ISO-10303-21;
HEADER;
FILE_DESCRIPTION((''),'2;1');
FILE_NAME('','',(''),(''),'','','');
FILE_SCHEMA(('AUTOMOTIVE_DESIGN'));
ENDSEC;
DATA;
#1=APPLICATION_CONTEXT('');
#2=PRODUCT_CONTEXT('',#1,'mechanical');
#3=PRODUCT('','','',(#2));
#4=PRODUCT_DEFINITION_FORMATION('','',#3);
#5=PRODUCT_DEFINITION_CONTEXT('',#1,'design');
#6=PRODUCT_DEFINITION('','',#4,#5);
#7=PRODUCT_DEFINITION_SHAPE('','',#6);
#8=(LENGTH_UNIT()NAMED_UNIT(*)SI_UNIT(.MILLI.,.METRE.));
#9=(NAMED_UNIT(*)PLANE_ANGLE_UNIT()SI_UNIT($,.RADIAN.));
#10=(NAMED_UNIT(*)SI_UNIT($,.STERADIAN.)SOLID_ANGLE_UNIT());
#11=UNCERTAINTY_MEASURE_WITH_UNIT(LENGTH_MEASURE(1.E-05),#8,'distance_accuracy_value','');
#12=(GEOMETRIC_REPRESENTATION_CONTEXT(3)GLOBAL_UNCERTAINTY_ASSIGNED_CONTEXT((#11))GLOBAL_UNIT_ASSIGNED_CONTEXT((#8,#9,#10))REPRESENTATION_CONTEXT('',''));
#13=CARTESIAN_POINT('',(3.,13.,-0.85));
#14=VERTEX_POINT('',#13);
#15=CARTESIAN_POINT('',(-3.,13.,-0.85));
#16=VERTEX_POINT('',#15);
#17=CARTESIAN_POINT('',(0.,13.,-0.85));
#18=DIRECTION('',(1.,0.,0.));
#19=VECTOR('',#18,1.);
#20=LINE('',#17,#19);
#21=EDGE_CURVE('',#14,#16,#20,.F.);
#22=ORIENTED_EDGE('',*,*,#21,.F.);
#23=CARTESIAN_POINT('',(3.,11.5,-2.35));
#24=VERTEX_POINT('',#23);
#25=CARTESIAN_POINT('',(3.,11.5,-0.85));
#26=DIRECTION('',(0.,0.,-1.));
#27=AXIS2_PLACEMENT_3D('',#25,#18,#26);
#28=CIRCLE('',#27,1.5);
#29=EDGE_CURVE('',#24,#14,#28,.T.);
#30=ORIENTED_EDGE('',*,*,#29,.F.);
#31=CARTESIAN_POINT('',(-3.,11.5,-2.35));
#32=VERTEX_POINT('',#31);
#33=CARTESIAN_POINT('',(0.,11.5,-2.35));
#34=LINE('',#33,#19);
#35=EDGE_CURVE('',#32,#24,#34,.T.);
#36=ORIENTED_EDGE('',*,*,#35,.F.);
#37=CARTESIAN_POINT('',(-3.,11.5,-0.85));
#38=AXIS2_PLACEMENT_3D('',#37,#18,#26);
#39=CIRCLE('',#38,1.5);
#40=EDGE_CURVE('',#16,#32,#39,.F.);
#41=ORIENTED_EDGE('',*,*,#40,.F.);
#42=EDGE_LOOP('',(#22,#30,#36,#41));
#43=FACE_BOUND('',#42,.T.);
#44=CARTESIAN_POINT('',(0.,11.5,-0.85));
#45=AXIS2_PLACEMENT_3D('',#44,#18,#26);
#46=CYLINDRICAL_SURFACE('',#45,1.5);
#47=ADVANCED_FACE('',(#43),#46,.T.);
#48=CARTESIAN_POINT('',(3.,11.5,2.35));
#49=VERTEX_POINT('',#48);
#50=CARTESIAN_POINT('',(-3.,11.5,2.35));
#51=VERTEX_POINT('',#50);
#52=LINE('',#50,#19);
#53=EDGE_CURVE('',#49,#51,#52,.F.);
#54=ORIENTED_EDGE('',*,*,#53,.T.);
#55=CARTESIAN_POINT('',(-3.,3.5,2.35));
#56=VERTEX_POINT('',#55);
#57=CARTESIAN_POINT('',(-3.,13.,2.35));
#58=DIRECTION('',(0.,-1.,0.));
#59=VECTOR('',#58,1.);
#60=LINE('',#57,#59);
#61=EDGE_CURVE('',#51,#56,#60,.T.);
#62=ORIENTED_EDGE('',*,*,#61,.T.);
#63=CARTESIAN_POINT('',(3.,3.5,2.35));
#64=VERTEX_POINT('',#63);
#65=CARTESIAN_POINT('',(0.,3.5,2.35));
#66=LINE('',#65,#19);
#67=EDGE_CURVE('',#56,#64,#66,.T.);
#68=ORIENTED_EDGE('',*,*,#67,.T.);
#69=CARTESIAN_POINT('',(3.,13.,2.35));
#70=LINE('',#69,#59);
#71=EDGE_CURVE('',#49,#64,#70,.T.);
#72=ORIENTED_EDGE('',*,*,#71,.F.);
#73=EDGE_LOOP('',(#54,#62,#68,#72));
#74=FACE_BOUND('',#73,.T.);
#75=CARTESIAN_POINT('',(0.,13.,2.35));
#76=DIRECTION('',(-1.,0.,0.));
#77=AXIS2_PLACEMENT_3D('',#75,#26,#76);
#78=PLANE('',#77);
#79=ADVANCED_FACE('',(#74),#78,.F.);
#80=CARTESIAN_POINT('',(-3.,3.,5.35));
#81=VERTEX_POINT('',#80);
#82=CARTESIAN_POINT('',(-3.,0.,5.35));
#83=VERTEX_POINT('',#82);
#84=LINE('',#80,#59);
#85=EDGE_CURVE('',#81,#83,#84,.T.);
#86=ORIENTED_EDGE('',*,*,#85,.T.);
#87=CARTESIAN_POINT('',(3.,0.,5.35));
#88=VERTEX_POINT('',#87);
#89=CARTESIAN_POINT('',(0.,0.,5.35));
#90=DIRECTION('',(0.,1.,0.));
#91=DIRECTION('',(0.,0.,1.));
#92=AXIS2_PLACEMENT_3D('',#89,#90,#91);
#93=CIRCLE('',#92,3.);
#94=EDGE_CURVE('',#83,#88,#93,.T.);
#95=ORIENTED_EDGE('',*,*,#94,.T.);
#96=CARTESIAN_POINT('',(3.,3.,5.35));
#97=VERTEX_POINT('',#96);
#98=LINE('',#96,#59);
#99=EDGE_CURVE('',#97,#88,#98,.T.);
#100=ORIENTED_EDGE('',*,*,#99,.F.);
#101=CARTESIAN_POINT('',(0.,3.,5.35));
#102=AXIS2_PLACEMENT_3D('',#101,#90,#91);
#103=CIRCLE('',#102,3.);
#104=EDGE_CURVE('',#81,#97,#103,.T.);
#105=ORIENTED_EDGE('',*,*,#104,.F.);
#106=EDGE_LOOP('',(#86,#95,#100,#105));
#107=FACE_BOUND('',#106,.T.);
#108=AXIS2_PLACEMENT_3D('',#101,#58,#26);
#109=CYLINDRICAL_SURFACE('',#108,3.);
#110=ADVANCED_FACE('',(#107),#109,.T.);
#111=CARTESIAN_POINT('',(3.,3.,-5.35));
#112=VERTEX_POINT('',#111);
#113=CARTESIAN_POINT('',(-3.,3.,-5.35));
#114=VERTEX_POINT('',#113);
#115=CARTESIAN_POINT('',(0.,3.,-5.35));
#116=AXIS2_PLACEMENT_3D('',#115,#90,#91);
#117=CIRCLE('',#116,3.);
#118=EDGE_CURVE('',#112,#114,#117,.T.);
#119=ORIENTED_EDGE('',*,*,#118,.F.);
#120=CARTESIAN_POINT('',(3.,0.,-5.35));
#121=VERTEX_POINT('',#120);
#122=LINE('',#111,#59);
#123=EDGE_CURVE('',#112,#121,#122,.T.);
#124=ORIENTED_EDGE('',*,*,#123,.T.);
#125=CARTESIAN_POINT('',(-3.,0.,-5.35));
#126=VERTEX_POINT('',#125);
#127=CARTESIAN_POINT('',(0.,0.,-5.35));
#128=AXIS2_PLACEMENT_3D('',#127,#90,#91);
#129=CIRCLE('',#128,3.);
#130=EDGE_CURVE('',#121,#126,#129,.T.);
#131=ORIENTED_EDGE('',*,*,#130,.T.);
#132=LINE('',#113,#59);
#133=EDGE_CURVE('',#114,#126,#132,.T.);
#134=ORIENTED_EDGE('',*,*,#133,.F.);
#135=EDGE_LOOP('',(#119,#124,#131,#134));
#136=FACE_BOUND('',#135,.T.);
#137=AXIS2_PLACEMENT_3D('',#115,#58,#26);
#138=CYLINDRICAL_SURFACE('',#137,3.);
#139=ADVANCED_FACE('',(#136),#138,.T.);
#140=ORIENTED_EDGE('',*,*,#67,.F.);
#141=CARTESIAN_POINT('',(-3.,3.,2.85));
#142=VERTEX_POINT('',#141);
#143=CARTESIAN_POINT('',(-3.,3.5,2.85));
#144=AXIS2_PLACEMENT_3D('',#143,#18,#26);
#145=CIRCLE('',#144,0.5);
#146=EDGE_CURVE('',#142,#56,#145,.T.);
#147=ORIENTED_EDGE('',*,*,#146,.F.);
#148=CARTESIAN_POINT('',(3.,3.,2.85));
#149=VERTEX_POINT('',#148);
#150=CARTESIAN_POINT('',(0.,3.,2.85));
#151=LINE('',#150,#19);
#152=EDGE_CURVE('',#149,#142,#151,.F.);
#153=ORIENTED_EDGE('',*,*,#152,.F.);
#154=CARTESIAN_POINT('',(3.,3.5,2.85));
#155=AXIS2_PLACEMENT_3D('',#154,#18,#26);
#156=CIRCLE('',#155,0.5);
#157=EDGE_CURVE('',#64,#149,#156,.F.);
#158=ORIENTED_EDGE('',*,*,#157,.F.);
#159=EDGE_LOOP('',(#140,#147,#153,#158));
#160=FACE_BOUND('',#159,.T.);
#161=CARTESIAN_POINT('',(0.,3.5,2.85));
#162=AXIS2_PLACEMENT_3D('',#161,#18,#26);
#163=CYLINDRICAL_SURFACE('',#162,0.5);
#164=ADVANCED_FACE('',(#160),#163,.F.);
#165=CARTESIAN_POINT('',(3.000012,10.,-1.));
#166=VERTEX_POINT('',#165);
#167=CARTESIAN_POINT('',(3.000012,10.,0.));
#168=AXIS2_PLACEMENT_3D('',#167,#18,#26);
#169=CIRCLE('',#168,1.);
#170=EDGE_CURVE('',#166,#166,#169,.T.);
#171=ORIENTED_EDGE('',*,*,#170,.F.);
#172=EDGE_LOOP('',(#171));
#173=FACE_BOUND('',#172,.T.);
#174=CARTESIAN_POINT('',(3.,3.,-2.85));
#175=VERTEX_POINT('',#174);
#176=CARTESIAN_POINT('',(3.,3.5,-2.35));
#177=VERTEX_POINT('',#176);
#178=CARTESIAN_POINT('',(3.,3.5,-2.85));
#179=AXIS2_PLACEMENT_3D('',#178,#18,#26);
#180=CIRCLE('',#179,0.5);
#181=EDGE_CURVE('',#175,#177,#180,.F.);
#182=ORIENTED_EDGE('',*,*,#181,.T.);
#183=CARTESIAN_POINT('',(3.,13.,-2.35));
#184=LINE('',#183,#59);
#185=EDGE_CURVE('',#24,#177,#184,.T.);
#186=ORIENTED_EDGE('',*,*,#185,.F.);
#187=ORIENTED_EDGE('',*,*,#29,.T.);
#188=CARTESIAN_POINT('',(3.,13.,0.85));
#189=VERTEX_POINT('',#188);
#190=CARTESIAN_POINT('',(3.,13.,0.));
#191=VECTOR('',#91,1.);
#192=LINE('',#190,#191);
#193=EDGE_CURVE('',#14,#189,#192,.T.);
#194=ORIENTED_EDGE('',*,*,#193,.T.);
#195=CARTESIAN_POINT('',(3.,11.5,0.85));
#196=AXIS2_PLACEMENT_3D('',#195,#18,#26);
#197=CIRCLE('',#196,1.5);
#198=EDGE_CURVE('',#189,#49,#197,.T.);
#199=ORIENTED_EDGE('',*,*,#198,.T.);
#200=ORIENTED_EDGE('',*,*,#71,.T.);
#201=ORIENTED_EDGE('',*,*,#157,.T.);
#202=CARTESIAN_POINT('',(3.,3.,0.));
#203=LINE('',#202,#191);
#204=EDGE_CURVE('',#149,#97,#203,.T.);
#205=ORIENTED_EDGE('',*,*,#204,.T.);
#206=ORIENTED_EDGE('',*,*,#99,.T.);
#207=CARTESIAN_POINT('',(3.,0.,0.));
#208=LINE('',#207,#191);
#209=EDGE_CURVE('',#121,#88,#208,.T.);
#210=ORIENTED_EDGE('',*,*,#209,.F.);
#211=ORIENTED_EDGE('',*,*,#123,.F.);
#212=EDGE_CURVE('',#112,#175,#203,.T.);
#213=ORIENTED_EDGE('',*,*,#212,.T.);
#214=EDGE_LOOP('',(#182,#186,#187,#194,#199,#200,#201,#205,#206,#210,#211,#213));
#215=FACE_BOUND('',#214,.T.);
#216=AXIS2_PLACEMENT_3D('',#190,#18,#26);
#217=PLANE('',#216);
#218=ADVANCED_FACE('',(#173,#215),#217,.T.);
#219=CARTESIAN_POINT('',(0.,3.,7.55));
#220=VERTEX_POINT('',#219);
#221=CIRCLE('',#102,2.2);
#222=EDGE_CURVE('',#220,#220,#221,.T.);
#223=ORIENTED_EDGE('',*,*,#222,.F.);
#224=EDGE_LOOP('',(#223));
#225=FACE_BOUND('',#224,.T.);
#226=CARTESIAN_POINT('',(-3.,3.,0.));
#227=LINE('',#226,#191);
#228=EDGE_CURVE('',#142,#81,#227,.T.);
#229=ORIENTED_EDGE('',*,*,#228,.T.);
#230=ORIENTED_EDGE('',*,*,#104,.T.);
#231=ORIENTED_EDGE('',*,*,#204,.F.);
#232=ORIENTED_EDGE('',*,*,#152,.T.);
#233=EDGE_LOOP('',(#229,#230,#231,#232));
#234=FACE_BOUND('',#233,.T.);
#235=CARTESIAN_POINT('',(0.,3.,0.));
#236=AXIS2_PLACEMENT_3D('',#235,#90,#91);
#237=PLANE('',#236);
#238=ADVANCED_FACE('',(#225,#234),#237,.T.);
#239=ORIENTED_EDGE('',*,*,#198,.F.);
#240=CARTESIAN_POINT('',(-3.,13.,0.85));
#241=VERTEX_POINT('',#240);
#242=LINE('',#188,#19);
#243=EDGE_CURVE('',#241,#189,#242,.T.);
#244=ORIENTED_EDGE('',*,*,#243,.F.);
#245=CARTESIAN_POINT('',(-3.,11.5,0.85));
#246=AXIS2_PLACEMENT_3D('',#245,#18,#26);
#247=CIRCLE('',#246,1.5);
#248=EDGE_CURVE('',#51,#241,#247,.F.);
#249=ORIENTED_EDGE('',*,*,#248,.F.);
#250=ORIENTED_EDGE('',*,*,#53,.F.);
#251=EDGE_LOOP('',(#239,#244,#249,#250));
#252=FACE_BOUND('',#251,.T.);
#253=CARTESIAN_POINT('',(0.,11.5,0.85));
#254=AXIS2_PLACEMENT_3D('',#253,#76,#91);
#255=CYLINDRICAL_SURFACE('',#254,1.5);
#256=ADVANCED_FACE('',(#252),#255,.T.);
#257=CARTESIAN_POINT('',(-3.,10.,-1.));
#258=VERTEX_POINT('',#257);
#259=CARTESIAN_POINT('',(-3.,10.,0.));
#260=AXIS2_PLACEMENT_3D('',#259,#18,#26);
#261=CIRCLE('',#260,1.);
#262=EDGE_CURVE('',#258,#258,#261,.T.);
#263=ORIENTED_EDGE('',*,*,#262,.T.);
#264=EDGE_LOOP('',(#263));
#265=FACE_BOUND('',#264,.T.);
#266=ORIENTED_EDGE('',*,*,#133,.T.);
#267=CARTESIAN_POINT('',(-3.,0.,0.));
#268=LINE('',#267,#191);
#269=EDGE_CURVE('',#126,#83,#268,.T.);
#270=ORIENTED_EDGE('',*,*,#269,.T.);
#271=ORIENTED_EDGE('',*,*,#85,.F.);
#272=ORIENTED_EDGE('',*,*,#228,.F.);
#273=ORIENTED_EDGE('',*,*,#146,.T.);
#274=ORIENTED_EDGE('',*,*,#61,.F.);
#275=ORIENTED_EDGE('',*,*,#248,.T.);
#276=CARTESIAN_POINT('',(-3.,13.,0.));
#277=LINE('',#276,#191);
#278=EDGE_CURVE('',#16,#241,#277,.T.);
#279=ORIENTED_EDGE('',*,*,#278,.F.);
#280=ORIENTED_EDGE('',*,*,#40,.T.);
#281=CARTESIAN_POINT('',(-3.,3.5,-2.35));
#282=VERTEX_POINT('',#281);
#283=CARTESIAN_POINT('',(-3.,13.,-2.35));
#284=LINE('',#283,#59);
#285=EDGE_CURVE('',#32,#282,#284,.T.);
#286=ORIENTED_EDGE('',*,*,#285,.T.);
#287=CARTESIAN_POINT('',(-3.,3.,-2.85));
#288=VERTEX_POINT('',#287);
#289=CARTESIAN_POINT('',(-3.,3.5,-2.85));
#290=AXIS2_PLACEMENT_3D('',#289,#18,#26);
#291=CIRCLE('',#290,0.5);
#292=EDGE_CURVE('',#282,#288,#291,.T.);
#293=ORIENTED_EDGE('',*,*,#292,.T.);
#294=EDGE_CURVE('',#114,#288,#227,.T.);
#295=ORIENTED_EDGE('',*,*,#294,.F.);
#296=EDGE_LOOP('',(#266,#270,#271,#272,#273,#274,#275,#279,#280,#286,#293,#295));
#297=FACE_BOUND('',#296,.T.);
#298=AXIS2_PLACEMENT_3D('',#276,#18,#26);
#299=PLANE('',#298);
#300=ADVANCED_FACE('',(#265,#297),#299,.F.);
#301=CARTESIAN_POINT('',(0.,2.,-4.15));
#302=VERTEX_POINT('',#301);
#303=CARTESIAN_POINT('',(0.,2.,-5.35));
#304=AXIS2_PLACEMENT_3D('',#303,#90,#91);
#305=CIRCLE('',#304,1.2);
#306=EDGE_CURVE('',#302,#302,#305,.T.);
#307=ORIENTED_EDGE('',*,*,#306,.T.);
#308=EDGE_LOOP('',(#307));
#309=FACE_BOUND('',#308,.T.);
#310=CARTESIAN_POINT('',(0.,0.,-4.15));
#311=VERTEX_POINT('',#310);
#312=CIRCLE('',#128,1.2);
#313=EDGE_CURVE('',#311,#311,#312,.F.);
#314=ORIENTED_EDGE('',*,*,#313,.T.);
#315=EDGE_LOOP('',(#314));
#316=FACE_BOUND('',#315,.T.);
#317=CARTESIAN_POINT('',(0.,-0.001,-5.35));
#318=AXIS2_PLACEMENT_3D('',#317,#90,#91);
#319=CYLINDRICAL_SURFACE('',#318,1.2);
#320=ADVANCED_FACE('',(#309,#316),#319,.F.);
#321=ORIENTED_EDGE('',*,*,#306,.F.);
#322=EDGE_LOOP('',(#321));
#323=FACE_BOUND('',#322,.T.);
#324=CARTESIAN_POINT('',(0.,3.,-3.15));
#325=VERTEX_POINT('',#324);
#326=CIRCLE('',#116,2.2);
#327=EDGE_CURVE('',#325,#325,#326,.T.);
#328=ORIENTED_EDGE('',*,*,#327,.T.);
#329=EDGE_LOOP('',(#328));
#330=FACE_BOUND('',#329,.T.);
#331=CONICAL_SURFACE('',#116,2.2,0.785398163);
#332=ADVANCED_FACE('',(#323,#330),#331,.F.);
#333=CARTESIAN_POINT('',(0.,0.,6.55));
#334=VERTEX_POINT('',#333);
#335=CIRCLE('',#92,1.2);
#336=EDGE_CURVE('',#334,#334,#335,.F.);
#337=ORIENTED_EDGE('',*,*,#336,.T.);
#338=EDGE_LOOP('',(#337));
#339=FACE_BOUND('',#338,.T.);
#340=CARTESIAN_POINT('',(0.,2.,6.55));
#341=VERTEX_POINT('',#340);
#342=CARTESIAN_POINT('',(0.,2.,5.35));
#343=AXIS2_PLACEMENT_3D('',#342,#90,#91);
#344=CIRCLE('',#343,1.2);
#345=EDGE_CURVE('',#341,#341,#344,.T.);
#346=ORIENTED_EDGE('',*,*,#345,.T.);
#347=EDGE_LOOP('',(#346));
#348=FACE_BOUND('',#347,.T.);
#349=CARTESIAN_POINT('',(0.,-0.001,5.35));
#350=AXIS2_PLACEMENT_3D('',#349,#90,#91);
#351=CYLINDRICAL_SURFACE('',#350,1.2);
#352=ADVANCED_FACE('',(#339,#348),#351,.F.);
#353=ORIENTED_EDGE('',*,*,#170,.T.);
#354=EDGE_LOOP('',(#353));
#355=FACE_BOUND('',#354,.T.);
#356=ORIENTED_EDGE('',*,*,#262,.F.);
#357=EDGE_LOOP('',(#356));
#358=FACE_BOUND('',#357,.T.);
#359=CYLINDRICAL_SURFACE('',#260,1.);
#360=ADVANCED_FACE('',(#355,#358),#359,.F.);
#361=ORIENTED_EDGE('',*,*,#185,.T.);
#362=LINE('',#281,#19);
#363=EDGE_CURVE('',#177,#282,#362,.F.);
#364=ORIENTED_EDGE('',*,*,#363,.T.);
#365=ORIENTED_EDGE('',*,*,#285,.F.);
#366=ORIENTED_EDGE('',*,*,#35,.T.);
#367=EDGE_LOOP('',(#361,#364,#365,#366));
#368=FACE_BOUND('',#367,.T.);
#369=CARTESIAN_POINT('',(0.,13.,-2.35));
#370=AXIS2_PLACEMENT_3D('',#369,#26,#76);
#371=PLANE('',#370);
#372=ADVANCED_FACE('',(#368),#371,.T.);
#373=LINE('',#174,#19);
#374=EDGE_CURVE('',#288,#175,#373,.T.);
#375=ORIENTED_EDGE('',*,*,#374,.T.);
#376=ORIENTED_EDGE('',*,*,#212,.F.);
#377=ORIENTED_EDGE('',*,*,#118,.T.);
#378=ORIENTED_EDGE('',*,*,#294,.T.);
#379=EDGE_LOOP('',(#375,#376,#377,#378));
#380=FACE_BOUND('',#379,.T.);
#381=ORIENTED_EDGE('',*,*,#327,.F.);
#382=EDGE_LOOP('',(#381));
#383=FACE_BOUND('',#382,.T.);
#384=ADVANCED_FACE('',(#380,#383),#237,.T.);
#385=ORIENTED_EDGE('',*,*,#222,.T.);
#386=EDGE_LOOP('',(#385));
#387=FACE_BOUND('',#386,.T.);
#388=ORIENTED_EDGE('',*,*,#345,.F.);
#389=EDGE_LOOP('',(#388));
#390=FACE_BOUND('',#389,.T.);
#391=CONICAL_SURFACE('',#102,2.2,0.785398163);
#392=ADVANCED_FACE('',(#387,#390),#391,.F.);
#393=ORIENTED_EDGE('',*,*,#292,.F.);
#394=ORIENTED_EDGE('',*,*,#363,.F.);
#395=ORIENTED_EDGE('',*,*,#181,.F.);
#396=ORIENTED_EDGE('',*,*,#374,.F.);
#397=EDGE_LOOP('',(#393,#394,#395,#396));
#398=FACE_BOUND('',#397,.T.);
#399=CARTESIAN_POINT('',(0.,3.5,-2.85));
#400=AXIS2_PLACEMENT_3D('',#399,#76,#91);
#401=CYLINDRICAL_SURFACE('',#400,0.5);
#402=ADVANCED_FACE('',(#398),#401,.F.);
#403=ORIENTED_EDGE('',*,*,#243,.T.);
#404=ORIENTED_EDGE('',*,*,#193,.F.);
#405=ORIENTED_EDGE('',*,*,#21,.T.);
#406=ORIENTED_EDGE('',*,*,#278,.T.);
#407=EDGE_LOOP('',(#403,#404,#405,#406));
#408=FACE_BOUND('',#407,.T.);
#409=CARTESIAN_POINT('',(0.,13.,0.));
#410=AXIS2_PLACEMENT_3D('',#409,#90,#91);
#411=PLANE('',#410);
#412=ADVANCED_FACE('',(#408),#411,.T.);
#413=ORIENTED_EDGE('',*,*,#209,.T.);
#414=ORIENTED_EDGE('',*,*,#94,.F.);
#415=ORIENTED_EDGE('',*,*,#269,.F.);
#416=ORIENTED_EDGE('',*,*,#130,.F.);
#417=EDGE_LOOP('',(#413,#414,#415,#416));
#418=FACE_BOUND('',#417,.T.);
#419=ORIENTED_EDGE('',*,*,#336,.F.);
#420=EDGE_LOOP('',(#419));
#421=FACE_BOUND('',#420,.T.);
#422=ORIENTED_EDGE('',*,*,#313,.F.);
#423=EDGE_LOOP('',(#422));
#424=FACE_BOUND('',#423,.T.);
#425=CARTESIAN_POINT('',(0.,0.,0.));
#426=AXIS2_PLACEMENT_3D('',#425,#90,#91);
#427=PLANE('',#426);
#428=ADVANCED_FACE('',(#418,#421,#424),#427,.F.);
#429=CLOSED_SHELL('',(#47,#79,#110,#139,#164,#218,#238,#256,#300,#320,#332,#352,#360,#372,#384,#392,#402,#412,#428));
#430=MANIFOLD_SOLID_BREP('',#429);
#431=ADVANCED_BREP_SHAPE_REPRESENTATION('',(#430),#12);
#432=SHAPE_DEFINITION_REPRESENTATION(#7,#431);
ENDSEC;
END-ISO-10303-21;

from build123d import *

# Parameters (mm, degrees)
CROQUIS1_W                   = 3
CROQUIS1_H                   = 4.7
SALIENTE_EXTRUIR1_DEPTH      = 13
SALIENTE_EXTRUIR2_DEPTH      = 3
CORTAR_EXTRUIR1_DEPTH        = 17.5747549
CORTAR_EXTRUIR1_DEPTH_BACK   = 17.5747549
CROQUIS2_R                   = 1
REDONDEO1_R                  = 0.5
TALADROAVANZADO1_OUTLINE_R   = 1.2
TALADROAVANZADO1_DEPTH       = 1
TALADROAVANZADO1_DRAFT       = -45
TALADROAVANZADO1_2_OUTLINE_R = 1.2
TALADROAVANZADO1_2_DEPTH     = 1
TALADROAVANZADO1_2_DRAFT     = -45
REDONDEO2_R                  = 1.5
CORTAR_EXTRUIR2_REACH        = 16.132
CROQUIS4_R                   = 1.2


# Read off the part's stored shape, not the designer's step: TaladroAvanzado1
with BuildPart() as part:
    # Croquis1 → Saliente-Extruir1 (new body)
    with BuildSketch(Plane(origin=(0, 0, 0), x_dir=(1, 0, 0), z_dir=(0, 1, 0))):
        with Locations((-1.5, 0)):
            Rectangle(CROQUIS1_W, CROQUIS1_H)
        with Locations((1.5, 0)):
            Rectangle(CROQUIS1_W, CROQUIS1_H)
    extrude(amount=SALIENTE_EXTRUIR1_DEPTH)

    # Croquis1<3> → Saliente-Extruir2 (add)
    with BuildSketch(Plane(origin=(0, 0, 0), x_dir=(1, 0, 0), z_dir=(0, 1, 0))):
        with BuildLine():
            Line((3, 2.35), (3, 5.35))
            ThreePointArc((3, 5.35), (0, 8.35), (-3, 5.35))
            Line((-3, 5.35), (-3, 2.35))
            Line((-3, 2.35), (3, 2.35))
        make_face()
        with BuildLine():
            Line((3, -5.35), (3, -2.35))
            Line((3, -2.35), (-3, -2.35))
            Line((-3, -2.35), (-3, -5.35))
            ThreePointArc((-3, -5.35), (0, -8.35), (3, -5.35))
        make_face()
    extrude(amount=SALIENTE_EXTRUIR2_DEPTH)

    # Croquis2 → Cortar-Extruir1 (cut, two sides: drawn at the far end of the back side and taken through both)
    with BuildSketch(Plane(origin=(3, 0, 0), x_dir=(0, 0, -1), z_dir=(1, 0, 0)).offset(-CORTAR_EXTRUIR1_DEPTH_BACK)):
        with Locations((0, 10)):
            Circle(CROQUIS2_R)
    extrude(amount=CORTAR_EXTRUIR1_DEPTH + CORTAR_EXTRUIR1_DEPTH_BACK, mode=Mode.SUBTRACT)

    # Redondeo1
    redondeo1_edges = [part.edges().sort_by_distance(p)[0] for p in [
        (0, 3, 2.35),
        (0, 3, -2.35),
    ]]
    fillet(redondeo1_edges, radius=REDONDEO1_R)


with BuildPart() as taladroavanzado1_tool:
    # TaladroAvanzado1 outline → TaladroAvanzado1 (with draft: the straight prism first)
    with BuildSketch(Plane(origin=(0, 2, 0), x_dir=(1, 0, 0), z_dir=(0, 1, 0))):
        with Locations((0, 5.35)):
            Circle(TALADROAVANZADO1_OUTLINE_R)
    extrude(amount=TALADROAVANZADO1_DEPTH)
    # TaladroAvanzado1: the draft: its side faces are tilted about the plane it starts from
    taladroavanzado1_sides = [taladroavanzado1_tool.faces().sort_by_distance(p)[0] for p in [
        (-1.2, 2.5, -5.35),
    ]]
    draft(taladroavanzado1_sides, Plane(origin=(0, 2, 0), x_dir=(1, 0, 0), z_dir=(0, 1, 0)), TALADROAVANZADO1_DRAFT)


with BuildPart() as part_1:
    add(part.part)

    # TaladroAvanzado1: cut by taladroavanzado1_tool
    add(taladroavanzado1_tool.part, mode=Mode.SUBTRACT)


with BuildPart() as taladroavanzado1_2_tool:
    # TaladroAvanzado1 2 outline → TaladroAvanzado1 2 (with draft: the straight prism first)
    with BuildSketch(Plane(origin=(0, 2, 0), x_dir=(1, 0, 0), z_dir=(0, 1, 0))):
        with Locations((0, -5.35)):
            Circle(TALADROAVANZADO1_2_OUTLINE_R)
    extrude(amount=TALADROAVANZADO1_2_DEPTH)
    # TaladroAvanzado1 2: the draft: its side faces are tilted about the plane it starts from
    taladroavanzado1_2_sides = [taladroavanzado1_2_tool.faces().sort_by_distance(p)[0] for p in [
        (-1.2, 2.5, 5.35),
    ]]
    draft(taladroavanzado1_2_sides, Plane(origin=(0, 2, 0), x_dir=(1, 0, 0), z_dir=(0, 1, 0)), TALADROAVANZADO1_2_DRAFT)


with BuildPart() as part_2:
    add(part_1.part)

    # TaladroAvanzado1 2: cut by taladroavanzado1_2_tool
    add(taladroavanzado1_2_tool.part, mode=Mode.SUBTRACT)

    # Redondeo2
    redondeo2_edges = [part_2.edges().sort_by_distance(p)[0] for p in [
        (0, 13, -2.35),
        (0, 13, 2.35),
    ]]
    fillet(redondeo2_edges, radius=REDONDEO2_R)

    # Croquis4 → Cortar-Extruir2 (cut, up to next)
    with BuildSketch(Plane(origin=(0, 2, 0), x_dir=(1, 0, 0), z_dir=(0, 1, 0)), mode=Mode.PRIVATE) as cortar_extruir2_sk1:
        with Locations(Location((0, -5.35, 0), (0, 0, 270))):
            Circle(CROQUIS4_R)
    cortar_extruir2_tool1 = extrude(cortar_extruir2_sk1.sketch, amount=-CORTAR_EXTRUIR2_REACH, mode=Mode.PRIVATE) & part_2.part
    # Croquis4 → Cortar-Extruir2 (cut, up to next)
    with BuildSketch(Plane(origin=(0, 2, 0), x_dir=(1, 0, 0), z_dir=(0, 1, 0)), mode=Mode.PRIVATE) as cortar_extruir2_sk2:
        with Locations(Location((0, 5.35, 0), (0, 0, 270))):
            Circle(CROQUIS4_R)
    cortar_extruir2_tool2 = extrude(cortar_extruir2_sk2.sketch, amount=-CORTAR_EXTRUIR2_REACH, mode=Mode.PRIVATE) & part_2.part
    add(cortar_extruir2_tool1.solids().sort_by_distance((0, 2, 5.35))[0], mode=Mode.SUBTRACT)
    add(cortar_extruir2_tool2.solids().sort_by_distance((0, 2, -5.35))[0], mode=Mode.SUBTRACT)


solid = part_2.part
